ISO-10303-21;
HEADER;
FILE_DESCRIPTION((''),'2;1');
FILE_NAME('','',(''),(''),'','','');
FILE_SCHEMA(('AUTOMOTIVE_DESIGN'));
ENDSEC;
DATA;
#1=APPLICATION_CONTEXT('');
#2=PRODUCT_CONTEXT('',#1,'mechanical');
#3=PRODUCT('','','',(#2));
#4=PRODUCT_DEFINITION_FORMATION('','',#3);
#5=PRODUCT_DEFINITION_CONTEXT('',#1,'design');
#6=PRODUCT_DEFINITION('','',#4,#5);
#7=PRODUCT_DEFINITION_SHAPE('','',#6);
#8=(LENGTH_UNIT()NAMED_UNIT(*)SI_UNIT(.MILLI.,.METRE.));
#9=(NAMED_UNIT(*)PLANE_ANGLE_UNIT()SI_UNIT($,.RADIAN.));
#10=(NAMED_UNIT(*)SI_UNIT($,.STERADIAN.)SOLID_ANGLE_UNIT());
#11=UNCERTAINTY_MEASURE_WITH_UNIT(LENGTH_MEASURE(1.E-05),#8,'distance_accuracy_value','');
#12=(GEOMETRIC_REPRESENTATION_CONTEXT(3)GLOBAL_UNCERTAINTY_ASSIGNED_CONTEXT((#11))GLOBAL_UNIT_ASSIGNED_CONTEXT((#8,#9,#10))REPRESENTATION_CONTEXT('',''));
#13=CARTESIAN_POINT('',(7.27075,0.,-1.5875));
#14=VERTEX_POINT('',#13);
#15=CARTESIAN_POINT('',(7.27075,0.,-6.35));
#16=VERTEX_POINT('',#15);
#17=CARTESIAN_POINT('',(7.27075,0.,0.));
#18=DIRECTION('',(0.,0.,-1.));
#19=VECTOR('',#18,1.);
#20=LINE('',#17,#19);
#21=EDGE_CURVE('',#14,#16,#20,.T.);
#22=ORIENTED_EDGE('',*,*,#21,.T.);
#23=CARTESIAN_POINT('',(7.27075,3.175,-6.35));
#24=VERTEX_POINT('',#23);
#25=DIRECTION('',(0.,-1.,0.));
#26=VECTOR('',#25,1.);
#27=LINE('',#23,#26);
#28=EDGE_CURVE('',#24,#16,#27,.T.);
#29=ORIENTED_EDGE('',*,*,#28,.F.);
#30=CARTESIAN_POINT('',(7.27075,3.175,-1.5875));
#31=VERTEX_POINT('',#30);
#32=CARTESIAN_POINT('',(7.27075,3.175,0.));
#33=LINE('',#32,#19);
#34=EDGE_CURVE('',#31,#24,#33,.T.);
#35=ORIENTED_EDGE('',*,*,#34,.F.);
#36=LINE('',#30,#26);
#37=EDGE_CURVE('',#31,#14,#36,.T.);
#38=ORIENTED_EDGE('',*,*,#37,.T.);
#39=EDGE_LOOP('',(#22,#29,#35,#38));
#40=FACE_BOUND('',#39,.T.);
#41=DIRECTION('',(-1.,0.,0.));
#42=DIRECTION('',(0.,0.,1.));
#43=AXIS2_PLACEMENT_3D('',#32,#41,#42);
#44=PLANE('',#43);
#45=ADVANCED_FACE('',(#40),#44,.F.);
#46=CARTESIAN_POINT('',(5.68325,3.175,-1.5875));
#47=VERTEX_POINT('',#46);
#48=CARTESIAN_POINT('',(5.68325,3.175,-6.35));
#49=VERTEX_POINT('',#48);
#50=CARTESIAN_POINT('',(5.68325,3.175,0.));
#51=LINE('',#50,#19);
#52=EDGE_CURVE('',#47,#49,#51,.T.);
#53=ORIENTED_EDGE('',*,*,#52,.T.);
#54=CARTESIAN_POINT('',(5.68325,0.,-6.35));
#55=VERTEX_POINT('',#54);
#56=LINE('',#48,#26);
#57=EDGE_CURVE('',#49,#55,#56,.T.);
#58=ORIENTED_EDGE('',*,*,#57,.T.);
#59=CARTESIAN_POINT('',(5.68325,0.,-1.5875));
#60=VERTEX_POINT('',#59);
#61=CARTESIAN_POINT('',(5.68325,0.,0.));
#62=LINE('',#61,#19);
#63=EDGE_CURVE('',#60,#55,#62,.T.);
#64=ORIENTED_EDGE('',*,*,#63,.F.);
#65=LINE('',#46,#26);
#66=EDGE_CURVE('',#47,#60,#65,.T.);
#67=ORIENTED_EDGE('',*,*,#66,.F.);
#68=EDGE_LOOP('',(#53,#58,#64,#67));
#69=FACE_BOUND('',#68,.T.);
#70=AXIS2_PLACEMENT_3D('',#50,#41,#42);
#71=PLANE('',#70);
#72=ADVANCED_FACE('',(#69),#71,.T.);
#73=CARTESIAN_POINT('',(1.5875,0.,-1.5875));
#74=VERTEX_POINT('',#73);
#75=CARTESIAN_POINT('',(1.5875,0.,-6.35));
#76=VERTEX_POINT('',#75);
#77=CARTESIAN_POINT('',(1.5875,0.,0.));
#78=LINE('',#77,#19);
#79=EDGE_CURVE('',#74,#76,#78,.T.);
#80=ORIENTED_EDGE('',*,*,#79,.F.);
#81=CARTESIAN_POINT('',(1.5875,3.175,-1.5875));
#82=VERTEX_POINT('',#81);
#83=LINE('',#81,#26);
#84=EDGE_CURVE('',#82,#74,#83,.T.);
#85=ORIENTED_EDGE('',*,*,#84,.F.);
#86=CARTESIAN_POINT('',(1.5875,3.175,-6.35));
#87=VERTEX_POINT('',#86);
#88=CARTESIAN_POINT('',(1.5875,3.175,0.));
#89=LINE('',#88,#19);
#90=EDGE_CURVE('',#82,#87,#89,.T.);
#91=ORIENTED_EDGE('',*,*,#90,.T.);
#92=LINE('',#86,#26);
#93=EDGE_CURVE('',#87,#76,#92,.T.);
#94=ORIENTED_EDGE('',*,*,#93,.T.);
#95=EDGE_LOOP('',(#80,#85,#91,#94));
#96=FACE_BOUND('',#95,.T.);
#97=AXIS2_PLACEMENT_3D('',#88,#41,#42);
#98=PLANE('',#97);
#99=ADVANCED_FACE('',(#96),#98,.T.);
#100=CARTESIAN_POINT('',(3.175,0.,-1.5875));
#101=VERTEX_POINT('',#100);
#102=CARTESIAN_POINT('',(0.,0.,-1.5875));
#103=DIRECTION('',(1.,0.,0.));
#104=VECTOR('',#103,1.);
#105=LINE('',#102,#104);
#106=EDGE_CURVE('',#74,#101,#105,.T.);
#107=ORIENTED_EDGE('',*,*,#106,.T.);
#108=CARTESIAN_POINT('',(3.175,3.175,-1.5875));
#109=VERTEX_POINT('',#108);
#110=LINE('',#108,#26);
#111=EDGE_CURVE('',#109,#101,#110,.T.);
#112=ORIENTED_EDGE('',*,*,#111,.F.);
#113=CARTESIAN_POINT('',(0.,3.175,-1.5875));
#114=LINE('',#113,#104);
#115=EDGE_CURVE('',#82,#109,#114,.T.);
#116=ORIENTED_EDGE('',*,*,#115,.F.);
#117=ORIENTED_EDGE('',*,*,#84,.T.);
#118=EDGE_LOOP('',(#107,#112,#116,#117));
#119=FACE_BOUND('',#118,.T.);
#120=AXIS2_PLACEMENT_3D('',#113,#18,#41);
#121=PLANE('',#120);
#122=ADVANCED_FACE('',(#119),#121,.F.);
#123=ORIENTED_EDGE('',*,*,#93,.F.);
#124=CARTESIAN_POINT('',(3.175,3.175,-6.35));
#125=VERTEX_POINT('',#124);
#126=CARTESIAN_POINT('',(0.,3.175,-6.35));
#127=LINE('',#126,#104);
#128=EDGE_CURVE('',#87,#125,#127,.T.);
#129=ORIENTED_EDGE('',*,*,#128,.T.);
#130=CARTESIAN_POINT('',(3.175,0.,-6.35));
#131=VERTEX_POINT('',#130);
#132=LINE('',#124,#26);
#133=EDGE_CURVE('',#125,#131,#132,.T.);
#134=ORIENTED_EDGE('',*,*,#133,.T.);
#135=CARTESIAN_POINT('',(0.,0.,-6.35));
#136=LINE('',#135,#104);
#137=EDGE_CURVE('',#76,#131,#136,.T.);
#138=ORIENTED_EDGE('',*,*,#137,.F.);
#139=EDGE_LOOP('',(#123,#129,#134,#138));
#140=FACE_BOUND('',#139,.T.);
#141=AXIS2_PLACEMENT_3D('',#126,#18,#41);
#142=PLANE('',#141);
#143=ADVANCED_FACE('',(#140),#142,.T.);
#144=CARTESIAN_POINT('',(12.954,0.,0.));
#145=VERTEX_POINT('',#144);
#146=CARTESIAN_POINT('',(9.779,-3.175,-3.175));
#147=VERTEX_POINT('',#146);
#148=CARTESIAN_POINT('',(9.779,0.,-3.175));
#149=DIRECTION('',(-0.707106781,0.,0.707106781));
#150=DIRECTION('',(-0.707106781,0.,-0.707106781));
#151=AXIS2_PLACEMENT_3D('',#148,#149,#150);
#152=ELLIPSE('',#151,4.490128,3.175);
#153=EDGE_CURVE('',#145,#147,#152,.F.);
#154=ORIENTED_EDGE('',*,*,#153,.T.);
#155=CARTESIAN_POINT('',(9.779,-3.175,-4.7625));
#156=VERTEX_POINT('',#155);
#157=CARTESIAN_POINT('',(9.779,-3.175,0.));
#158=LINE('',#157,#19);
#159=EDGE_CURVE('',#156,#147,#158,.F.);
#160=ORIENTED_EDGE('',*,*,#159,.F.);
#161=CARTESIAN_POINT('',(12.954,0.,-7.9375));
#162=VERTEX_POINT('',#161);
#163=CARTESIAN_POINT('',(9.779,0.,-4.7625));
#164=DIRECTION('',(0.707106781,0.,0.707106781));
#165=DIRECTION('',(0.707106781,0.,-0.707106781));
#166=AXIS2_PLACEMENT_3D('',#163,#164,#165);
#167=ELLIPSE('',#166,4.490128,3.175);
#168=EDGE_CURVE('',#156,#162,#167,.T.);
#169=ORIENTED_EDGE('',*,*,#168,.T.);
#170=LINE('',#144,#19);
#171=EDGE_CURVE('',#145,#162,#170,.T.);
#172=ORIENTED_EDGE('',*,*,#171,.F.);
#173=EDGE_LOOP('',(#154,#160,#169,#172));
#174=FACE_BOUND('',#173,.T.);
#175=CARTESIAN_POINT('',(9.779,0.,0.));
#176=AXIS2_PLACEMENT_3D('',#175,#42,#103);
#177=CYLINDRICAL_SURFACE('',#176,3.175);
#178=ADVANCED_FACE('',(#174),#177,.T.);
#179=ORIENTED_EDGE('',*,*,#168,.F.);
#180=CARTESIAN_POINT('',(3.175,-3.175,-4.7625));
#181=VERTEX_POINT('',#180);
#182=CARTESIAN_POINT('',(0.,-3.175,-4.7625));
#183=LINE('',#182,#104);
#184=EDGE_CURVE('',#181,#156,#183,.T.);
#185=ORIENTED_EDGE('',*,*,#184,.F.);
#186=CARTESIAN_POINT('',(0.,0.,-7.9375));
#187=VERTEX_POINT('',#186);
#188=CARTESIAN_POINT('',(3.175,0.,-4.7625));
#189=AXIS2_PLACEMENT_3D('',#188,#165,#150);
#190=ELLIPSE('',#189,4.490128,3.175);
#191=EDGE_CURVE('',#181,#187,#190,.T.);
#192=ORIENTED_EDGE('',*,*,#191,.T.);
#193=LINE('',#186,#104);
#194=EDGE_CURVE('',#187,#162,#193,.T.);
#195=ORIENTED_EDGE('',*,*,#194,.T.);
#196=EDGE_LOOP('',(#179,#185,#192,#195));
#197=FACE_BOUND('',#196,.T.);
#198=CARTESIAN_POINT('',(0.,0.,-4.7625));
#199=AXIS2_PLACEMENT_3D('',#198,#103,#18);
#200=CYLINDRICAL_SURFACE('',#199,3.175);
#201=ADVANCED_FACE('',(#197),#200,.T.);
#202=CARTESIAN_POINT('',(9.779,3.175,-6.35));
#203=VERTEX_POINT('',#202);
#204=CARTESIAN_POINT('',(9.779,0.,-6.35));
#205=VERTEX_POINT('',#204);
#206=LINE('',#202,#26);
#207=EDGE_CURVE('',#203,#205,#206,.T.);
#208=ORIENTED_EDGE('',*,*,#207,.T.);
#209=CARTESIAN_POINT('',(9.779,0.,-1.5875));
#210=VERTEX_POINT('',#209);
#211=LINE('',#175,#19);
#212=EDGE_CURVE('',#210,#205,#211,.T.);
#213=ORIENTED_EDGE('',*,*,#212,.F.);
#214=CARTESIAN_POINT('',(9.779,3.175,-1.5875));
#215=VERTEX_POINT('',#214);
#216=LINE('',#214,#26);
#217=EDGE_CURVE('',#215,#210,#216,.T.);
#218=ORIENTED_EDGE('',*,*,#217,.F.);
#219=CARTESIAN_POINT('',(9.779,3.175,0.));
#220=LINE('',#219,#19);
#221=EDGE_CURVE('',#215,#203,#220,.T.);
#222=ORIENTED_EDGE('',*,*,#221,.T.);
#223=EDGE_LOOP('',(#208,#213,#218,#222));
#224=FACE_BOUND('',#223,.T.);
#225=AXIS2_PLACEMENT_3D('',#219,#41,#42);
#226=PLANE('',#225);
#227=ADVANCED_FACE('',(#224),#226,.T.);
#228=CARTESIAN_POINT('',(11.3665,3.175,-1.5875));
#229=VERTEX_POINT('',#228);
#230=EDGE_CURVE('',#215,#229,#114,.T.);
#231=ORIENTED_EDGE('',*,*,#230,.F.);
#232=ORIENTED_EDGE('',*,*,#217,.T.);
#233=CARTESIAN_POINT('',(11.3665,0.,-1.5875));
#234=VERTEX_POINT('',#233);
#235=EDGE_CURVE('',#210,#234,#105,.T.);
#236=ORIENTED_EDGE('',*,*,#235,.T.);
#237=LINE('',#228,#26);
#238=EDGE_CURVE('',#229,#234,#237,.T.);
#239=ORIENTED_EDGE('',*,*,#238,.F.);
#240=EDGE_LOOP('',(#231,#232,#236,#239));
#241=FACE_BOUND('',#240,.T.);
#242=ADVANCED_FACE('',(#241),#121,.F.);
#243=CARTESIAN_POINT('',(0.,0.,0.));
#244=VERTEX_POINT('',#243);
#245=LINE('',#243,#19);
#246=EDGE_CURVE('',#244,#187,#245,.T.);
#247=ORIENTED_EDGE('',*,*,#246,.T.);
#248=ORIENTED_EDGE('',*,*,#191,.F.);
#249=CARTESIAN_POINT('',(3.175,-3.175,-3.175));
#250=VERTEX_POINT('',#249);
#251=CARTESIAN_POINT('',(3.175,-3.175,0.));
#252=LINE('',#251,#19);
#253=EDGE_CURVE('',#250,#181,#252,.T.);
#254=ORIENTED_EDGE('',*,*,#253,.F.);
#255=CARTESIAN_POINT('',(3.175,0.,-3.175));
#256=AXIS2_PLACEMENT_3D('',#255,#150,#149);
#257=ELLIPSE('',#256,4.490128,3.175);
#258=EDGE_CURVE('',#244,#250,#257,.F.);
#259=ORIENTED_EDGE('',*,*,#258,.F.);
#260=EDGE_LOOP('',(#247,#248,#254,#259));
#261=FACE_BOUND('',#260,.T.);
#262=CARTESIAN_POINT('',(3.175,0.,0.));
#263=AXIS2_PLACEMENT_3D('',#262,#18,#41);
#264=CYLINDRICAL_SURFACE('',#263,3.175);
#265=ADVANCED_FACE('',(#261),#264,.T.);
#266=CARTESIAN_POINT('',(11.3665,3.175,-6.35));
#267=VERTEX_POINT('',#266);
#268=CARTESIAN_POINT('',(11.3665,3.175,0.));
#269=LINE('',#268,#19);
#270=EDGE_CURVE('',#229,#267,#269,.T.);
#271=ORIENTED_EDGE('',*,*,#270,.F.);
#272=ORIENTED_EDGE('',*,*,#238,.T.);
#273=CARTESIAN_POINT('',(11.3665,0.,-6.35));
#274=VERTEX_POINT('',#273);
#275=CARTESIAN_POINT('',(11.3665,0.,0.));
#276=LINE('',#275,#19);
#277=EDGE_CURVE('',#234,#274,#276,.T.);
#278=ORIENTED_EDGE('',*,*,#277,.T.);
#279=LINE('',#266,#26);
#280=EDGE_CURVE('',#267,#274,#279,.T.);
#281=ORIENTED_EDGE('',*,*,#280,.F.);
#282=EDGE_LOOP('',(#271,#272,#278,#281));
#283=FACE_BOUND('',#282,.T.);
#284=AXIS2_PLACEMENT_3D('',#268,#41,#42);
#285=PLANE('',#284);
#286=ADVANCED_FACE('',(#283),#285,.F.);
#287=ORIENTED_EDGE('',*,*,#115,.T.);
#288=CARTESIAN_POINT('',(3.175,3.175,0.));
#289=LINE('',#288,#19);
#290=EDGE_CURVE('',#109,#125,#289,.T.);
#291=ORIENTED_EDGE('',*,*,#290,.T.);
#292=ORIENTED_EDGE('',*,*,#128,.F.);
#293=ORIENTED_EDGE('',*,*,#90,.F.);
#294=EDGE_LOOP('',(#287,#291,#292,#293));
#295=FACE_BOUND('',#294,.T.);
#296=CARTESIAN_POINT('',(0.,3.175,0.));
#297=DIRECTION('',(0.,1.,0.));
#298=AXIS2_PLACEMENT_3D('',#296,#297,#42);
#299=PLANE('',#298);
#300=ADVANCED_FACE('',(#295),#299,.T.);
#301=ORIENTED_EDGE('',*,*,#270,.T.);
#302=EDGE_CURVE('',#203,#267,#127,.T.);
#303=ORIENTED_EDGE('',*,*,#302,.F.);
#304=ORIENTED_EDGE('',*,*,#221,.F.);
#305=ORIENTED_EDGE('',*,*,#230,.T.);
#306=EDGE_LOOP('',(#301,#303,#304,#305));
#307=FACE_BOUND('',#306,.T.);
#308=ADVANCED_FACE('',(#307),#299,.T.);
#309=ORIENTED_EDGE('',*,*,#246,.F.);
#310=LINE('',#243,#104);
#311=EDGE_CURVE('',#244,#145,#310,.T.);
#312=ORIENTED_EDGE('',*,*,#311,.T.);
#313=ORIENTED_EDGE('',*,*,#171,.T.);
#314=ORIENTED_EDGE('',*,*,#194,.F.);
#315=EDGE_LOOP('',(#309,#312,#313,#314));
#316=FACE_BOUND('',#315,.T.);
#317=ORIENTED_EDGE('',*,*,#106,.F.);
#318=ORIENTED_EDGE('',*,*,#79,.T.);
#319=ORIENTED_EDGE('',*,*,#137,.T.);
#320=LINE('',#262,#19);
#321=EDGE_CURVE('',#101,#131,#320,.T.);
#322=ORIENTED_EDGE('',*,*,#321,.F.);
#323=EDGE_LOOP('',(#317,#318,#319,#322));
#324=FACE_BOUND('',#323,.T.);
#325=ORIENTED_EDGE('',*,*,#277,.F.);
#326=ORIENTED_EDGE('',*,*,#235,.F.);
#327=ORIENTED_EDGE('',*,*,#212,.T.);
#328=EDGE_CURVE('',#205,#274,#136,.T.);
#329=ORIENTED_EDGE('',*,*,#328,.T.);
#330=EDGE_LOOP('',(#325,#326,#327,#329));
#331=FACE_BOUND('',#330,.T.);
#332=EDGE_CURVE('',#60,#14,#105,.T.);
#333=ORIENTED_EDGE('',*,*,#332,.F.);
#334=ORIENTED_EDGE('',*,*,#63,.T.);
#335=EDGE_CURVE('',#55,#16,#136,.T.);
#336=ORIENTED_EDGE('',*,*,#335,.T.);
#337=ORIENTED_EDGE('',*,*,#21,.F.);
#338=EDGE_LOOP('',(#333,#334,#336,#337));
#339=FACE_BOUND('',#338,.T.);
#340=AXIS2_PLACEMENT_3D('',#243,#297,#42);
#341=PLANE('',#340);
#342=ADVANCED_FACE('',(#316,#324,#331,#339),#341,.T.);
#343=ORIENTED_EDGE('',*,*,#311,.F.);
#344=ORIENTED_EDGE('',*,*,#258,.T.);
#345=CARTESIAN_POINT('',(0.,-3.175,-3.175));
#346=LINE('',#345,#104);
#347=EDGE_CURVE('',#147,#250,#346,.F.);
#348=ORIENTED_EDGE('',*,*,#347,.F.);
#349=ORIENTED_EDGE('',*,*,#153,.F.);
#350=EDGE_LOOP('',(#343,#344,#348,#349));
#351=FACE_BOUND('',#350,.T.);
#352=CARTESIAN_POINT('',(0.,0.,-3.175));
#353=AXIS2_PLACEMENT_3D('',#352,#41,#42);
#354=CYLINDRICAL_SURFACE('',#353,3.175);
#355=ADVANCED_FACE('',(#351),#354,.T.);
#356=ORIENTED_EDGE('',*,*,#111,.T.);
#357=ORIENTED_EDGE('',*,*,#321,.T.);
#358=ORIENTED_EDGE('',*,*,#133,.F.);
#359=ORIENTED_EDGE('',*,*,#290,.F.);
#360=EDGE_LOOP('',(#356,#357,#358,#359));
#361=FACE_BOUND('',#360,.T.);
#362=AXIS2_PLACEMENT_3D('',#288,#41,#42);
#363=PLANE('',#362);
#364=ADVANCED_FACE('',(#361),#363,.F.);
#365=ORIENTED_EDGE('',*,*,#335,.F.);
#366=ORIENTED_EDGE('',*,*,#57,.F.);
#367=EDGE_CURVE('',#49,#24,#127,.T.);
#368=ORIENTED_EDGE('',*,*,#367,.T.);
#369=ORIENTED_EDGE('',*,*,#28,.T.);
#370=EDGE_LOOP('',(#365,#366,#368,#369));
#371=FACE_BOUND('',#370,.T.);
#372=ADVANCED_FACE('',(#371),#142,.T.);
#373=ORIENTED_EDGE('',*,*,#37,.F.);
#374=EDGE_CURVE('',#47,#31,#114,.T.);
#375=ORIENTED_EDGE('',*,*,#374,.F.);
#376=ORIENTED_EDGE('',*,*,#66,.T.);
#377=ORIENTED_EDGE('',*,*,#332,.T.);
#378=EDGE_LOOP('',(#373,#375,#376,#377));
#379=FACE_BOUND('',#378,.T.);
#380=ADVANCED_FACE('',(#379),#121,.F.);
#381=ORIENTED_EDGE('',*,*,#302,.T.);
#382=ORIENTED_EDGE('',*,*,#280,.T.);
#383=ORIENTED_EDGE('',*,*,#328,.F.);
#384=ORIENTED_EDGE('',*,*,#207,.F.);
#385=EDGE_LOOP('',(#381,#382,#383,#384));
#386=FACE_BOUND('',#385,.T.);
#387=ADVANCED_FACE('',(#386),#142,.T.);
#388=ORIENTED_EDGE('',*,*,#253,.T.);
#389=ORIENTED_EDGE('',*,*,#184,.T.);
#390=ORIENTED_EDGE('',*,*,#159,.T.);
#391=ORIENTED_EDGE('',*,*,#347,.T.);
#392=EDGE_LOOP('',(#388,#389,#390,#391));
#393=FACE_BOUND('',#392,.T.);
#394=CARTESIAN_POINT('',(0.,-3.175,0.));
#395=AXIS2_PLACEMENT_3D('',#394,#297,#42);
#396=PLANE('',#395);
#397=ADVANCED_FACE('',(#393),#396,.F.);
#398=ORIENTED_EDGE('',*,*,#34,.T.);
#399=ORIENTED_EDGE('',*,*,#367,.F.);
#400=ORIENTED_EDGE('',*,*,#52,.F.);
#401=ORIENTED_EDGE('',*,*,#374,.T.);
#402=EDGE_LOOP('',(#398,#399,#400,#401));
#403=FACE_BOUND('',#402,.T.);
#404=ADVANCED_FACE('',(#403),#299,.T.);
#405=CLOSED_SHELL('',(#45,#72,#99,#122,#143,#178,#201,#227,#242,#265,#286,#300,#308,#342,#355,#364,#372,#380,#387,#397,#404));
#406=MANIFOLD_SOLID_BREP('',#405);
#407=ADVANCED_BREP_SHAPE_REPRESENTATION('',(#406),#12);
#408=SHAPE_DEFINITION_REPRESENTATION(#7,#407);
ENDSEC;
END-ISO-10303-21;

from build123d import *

# Parameters (mm, degrees)
SKETCH1_W           = 12.954
SKETCH1_H           = 7.9375
SKETCH1_W_2         = 1.5875
SKETCH1_H_2         = 4.7625
BOSS_EXTRUDE1_DEPTH = 3.175
SKETCH1_3_W         = 1.5875
SKETCH1_3_H         = 4.7625
BOSS_EXTRUDE2_DEPTH = 3.175
FILLET1_R           = 3.175


with BuildPart() as part:
    # Sketch1 → Boss-Extrude1 (new body)
    # profile 1 of 4: a face of its own
    with BuildSketch(Plane(origin=(0, 0, 0), x_dir=(1, 0, 0), z_dir=(0, 1, 0))):
        with Locations((6.477, 3.96875)):
            Rectangle(SKETCH1_W, SKETCH1_H)
        with Locations((10.57275, 3.96875)):
            Rectangle(SKETCH1_W_2, SKETCH1_H_2, mode=Mode.SUBTRACT)
        with Locations((6.477, 3.96875)):
            Rectangle(SKETCH1_W_2, SKETCH1_H_2, mode=Mode.SUBTRACT)
        with Locations((2.38125, 3.96875)):
            Rectangle(SKETCH1_W_2, SKETCH1_H_2, mode=Mode.SUBTRACT)
    # profile 2 of 4: a face of its own
    with BuildSketch(Plane(origin=(0, 0, 0), x_dir=(1, 0, 0), z_dir=(0, 1, 0))):
        with Locations((2.38125, 3.96875)):
            Rectangle(SKETCH1_W_2, SKETCH1_H_2)
    # profile 3 of 4: a face of its own
    with BuildSketch(Plane(origin=(0, 0, 0), x_dir=(1, 0, 0), z_dir=(0, 1, 0))):
        with Locations((6.477, 3.96875)):
            Rectangle(SKETCH1_W_2, SKETCH1_H_2)
    # profile 4 of 4: a face of its own
    with BuildSketch(Plane(origin=(0, 0, 0), x_dir=(1, 0, 0), z_dir=(0, 1, 0))):
        with Locations((10.57275, 3.96875)):
            Rectangle(SKETCH1_W_2, SKETCH1_H_2)
    extrude(amount=-BOSS_EXTRUDE1_DEPTH)

    # Sketch1<3> → Boss-Extrude2 (add)
    with BuildSketch(Plane(origin=(0, 0, 0), x_dir=(1, 0, 0), z_dir=(0, 1, 0))):
        with Locations((2.38125, 3.96875)):
            Rectangle(SKETCH1_3_W, SKETCH1_3_H)
        with Locations((6.477, 3.96875)):
            Rectangle(SKETCH1_3_W, SKETCH1_3_H)
        with Locations((10.57275, 3.96875)):
            Rectangle(SKETCH1_3_W, SKETCH1_3_H)
    extrude(amount=BOSS_EXTRUDE2_DEPTH)

    # Fillet1
    fillet1_edges = [part.edges().sort_by_distance(p)[0] for p in [
        (12.954, -3.175, -3.96875),
        (6.477, -3.175, -7.9375),
        (0, -3.175, -3.96875),
        (6.477, -3.175, 0),
    ]]
    fillet(fillet1_edges, radius=FILLET1_R - 0.0001)  # a hair under: the kernel refuses the full size


solid = part.part
